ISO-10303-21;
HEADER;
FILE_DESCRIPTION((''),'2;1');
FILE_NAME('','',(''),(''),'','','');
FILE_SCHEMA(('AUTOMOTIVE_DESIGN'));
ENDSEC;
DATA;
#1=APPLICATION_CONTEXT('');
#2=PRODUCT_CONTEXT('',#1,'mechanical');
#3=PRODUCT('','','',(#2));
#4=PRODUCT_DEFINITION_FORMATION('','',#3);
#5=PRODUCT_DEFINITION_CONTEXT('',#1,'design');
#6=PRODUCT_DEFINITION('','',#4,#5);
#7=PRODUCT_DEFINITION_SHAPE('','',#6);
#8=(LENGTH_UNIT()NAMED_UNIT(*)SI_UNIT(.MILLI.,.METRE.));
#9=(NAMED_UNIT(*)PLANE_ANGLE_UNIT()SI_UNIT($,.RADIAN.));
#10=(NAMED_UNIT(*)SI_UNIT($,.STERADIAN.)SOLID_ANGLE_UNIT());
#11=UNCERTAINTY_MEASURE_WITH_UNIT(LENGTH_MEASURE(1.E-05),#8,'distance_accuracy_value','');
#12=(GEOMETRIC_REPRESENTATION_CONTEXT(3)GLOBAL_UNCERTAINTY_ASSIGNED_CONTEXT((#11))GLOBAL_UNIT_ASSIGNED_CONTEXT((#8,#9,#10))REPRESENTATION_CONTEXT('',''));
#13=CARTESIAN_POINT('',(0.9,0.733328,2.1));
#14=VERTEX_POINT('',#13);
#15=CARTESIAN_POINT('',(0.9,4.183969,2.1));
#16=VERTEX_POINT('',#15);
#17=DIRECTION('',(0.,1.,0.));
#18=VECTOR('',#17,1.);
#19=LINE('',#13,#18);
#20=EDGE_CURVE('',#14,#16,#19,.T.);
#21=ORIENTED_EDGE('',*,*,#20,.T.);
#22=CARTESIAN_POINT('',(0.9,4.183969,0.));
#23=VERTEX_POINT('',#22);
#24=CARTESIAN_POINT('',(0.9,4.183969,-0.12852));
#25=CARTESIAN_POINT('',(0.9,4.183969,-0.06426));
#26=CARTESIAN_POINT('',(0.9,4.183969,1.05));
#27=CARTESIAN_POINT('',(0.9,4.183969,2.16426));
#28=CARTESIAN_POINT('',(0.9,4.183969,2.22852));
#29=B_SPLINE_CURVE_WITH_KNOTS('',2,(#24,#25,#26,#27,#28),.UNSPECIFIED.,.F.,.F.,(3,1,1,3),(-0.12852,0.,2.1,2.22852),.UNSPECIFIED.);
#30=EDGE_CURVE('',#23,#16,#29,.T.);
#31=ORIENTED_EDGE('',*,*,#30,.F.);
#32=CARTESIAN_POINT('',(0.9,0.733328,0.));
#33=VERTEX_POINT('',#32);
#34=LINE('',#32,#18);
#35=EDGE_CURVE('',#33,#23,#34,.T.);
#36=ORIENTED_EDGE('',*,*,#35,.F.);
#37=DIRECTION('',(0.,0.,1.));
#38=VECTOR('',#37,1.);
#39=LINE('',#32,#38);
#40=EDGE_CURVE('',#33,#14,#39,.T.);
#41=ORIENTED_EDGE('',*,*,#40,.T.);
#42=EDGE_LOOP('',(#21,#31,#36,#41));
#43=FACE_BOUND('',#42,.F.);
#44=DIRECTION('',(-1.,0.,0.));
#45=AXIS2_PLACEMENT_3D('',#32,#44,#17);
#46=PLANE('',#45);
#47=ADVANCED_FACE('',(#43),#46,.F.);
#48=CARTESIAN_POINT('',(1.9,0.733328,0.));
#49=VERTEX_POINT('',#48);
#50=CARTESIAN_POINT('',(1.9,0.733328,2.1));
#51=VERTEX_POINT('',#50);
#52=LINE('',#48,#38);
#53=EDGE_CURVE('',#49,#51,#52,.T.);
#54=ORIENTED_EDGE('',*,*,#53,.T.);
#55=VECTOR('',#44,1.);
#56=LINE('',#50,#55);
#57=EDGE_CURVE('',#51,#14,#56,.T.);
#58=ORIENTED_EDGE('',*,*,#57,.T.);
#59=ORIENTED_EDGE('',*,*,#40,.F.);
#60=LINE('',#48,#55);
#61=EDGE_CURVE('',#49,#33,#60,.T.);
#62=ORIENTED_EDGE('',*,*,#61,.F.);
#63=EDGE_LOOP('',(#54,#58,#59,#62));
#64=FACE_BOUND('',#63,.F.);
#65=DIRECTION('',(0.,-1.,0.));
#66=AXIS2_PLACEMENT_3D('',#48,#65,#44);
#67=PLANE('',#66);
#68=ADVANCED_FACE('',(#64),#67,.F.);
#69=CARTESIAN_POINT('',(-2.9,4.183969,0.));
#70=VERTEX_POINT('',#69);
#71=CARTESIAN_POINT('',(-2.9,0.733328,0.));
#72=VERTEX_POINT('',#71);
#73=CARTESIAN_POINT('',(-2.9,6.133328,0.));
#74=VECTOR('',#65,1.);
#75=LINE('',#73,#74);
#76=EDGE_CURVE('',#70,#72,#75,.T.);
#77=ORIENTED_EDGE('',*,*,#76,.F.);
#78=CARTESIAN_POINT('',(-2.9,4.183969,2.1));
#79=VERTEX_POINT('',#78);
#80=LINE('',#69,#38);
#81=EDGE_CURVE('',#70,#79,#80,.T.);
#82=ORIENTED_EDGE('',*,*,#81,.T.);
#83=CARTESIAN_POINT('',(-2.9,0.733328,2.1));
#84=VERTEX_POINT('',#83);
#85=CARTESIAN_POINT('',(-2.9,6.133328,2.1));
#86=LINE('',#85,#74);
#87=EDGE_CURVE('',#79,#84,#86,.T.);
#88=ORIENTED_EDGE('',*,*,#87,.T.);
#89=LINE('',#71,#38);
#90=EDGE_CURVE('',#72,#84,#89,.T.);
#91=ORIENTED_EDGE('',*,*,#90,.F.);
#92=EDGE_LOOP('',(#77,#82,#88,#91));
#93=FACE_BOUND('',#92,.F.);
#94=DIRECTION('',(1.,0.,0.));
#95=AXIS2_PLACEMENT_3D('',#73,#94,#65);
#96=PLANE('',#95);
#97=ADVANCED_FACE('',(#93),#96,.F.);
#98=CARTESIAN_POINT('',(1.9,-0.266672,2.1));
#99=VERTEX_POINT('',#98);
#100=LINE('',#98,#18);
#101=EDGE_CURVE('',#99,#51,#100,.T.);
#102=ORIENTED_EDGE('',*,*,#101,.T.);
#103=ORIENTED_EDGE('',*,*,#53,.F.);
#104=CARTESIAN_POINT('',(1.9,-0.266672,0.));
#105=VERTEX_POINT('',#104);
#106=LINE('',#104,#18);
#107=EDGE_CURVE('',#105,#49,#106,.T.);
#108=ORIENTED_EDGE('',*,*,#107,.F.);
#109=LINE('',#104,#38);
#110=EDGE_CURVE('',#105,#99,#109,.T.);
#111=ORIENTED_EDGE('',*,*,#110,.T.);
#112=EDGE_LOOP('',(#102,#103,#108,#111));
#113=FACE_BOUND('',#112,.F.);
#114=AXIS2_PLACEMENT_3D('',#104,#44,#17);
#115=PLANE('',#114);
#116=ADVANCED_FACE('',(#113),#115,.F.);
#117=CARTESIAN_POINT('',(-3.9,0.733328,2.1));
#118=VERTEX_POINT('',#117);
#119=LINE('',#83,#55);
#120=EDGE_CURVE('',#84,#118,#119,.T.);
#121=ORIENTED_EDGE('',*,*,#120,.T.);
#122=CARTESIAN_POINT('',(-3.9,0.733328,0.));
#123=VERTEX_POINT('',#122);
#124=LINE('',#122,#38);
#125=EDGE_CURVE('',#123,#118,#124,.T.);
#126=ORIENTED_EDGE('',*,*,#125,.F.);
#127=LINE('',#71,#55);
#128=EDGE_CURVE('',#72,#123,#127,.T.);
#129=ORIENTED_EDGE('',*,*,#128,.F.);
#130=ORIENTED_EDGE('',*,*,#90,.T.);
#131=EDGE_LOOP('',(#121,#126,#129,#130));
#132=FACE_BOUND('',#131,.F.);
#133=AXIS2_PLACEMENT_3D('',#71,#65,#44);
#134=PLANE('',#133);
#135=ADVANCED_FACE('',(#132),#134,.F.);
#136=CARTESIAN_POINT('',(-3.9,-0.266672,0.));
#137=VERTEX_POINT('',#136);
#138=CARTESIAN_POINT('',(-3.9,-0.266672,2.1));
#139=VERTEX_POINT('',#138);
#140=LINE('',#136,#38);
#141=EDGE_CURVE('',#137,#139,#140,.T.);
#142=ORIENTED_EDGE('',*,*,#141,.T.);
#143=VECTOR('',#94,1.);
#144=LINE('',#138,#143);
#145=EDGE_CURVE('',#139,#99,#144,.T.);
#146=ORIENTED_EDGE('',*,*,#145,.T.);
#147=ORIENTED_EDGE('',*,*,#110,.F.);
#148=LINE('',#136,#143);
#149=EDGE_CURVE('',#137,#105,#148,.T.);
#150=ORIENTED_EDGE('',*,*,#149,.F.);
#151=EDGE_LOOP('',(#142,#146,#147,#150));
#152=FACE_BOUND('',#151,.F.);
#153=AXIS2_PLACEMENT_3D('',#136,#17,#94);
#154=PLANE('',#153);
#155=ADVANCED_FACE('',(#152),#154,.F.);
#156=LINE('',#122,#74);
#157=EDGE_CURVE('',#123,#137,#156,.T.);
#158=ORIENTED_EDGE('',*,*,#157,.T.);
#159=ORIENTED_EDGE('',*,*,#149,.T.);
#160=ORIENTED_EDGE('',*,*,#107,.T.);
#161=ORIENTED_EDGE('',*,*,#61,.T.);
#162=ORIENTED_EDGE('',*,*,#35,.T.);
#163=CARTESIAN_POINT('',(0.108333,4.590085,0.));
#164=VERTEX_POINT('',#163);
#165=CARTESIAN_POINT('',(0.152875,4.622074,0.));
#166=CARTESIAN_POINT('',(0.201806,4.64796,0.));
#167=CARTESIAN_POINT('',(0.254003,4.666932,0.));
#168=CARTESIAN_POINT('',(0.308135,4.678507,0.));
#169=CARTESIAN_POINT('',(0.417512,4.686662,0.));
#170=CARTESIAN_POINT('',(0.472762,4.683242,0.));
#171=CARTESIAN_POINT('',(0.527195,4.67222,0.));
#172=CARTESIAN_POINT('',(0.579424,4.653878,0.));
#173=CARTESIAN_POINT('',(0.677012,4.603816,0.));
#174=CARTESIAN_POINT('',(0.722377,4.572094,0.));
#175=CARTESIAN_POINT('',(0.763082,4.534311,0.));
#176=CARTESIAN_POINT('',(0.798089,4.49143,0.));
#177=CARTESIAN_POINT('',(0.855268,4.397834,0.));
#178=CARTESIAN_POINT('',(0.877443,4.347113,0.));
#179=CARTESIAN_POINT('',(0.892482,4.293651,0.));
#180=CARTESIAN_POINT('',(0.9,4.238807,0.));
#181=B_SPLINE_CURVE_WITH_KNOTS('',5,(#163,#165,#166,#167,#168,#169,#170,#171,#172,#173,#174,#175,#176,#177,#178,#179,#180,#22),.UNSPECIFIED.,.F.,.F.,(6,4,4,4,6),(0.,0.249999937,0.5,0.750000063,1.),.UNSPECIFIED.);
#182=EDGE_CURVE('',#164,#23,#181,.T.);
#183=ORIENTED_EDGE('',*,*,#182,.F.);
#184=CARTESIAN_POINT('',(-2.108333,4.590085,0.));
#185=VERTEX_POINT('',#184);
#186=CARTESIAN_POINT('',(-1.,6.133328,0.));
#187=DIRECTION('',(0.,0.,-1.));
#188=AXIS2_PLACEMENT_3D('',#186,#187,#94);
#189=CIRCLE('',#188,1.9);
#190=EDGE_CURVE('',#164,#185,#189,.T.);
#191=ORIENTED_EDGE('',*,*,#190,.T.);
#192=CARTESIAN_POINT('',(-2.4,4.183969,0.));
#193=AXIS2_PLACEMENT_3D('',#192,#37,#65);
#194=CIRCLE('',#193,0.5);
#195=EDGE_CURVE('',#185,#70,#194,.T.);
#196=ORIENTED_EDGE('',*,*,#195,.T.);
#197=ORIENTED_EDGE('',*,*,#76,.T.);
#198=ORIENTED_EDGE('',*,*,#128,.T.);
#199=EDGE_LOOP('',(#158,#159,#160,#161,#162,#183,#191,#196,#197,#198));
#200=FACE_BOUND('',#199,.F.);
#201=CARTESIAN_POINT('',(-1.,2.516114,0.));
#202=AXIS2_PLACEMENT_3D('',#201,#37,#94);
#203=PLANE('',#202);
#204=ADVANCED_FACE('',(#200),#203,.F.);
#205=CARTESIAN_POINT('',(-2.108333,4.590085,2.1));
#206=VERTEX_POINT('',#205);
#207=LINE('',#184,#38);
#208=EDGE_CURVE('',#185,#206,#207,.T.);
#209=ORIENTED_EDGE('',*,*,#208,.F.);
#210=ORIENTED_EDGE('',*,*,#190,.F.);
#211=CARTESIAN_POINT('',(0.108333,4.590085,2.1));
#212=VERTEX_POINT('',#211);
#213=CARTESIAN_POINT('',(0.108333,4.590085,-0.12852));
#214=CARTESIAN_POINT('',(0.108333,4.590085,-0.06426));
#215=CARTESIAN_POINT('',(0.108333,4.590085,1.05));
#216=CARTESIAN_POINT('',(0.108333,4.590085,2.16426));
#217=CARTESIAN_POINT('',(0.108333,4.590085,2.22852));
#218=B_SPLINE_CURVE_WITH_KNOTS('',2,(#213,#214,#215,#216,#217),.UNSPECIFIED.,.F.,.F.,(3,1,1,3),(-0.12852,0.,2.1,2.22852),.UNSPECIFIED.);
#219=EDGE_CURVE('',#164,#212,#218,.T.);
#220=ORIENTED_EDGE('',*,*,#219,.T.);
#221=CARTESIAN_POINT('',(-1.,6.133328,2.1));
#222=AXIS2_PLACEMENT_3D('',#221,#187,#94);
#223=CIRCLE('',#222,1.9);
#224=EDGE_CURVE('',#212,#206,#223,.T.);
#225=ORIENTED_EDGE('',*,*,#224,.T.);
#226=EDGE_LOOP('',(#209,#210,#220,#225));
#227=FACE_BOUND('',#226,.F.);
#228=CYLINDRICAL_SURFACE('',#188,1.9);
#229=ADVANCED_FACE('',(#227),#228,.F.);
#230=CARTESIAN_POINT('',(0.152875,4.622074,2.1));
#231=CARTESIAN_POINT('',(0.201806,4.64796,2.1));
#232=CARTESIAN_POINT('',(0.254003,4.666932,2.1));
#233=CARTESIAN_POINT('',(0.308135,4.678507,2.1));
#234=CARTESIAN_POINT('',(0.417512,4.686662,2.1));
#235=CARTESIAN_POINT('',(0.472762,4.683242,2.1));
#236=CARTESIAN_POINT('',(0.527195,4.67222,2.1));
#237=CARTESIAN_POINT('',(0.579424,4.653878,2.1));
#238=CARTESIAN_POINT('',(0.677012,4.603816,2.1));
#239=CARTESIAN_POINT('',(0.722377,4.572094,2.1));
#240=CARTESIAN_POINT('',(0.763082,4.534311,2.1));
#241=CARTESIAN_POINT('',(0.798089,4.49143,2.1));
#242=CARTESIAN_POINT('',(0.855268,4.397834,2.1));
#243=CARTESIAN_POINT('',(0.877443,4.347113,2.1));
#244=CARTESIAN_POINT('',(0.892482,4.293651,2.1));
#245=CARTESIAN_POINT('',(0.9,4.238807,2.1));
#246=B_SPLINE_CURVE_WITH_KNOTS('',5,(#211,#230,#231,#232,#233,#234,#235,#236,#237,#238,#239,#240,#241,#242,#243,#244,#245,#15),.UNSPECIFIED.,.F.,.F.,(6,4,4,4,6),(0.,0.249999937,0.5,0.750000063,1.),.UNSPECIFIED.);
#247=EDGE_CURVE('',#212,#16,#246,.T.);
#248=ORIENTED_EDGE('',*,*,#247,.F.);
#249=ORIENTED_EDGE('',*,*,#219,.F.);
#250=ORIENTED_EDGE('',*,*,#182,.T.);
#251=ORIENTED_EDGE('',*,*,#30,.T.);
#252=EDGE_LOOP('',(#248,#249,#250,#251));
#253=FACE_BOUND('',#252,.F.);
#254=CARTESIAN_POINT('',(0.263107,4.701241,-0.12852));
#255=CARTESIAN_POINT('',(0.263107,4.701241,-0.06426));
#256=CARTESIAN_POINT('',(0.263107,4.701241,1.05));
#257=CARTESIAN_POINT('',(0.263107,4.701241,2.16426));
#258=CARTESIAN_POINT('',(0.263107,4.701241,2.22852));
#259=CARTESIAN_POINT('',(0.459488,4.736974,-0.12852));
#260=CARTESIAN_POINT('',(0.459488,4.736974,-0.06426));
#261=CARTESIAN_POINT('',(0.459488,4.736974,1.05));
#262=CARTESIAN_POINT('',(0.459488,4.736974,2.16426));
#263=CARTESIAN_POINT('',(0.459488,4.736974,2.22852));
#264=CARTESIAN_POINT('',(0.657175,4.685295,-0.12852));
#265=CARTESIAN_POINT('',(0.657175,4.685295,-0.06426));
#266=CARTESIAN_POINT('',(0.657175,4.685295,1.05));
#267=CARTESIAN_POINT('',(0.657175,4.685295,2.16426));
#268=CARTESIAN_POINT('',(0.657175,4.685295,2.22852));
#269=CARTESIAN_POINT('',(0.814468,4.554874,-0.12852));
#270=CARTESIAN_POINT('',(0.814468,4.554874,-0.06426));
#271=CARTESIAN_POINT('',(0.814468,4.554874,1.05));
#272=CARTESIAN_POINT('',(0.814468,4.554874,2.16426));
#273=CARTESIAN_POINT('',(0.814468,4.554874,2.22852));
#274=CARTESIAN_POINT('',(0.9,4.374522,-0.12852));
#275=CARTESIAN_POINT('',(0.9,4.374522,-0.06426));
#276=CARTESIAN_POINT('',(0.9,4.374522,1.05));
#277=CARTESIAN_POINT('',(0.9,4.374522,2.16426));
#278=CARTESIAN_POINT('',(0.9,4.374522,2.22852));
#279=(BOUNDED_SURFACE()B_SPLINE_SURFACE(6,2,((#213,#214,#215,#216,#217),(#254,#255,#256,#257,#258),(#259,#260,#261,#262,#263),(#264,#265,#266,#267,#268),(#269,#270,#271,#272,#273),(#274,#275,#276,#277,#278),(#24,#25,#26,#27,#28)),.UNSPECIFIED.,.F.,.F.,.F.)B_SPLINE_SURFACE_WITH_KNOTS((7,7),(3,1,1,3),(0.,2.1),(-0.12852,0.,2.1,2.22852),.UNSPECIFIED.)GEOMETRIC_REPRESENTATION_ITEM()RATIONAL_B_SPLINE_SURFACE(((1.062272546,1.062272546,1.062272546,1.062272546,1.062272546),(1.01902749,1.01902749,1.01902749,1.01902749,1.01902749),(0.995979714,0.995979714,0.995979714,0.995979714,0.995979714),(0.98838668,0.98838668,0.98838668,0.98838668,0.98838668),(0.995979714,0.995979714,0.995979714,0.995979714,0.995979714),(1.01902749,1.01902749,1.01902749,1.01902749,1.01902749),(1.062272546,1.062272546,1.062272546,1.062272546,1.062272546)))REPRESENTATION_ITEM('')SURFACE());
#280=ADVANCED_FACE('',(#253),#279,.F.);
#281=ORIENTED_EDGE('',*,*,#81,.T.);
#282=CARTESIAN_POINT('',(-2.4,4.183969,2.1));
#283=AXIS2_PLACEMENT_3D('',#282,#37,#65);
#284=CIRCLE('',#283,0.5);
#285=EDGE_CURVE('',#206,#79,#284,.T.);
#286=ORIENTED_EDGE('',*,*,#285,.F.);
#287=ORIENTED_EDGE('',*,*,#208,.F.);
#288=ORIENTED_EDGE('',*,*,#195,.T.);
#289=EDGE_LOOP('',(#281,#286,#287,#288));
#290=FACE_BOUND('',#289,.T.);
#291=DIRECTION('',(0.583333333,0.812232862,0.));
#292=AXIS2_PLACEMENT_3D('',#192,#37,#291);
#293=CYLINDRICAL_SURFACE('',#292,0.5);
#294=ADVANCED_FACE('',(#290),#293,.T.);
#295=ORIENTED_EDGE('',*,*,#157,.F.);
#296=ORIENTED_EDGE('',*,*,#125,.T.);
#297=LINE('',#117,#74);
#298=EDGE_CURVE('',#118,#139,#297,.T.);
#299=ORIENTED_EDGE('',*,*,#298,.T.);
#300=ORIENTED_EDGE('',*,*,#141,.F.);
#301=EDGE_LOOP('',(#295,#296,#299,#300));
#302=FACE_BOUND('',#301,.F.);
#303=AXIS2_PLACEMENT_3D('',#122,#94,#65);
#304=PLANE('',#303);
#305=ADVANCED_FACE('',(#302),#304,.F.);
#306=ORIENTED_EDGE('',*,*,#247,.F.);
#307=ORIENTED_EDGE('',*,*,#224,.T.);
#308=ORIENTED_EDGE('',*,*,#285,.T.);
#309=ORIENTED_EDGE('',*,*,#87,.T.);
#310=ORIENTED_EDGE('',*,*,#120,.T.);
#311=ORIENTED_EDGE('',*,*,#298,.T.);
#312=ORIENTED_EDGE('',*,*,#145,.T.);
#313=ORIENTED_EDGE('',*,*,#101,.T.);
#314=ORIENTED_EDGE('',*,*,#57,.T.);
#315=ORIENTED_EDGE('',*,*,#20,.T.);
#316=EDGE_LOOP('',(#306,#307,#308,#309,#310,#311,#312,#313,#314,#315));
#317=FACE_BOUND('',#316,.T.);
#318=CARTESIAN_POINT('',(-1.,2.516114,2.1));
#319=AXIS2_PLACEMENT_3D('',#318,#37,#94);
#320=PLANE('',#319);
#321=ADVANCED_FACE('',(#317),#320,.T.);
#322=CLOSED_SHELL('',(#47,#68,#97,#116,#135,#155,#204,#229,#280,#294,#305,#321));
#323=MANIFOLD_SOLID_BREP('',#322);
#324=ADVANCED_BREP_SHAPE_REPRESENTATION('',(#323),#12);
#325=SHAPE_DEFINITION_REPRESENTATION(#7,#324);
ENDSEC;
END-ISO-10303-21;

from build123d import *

# Parameters (mm, degrees)
F1_DEPTH = 2.1
F2_F1_R  = 0.5
F2_F2_R  = 0.5


with BuildPart() as f1:
    # F0 (on Top) → F1 (new body)
    with BuildSketch(Plane.XY):
        with BuildLine():
            Line((-3.9, 0.7333275447), (-3.9, -0.2666724553))
            Line((-3.9, -0.2666724553), (1.9, -0.2666724553))
            Line((1.9, -0.2666724553), (1.9, 0.7333275447))
            Line((1.9, 0.7333275447), (0.9, 0.7333275447))
            Line((0.9, 0.7333275447), (0.9, 6.1333275447))
            ThreePointArc((0.9, 6.1333275447), (-1, 4.2333275447), (-2.9, 6.1333275447))
            Line((-2.9, 6.1333275447), (-2.9, 0.7333275447))
            Line((-2.9, 0.7333275447), (-3.9, 0.7333275447))
        make_face()
    extrude(amount=F1_DEPTH)

    # F2: fillet of radius 0.5 on 2 edges, made by hand

    # F2_f1
    f2_f1_edges = [f1.edges().sort_by_distance(p)[0] for p in [
        (-2.9, 6.1333275447, 1.05),
    ]]
    fillet(f2_f1_edges, radius=F2_F1_R)

    # F2_f2
    f2_f2_edges = [f1.edges().sort_by_distance(p)[0] for p in [
        (0.9, 6.1333275447, 1.05),
    ]]
    fillet(f2_f2_edges, radius=F2_F2_R)


solid = f1.part
